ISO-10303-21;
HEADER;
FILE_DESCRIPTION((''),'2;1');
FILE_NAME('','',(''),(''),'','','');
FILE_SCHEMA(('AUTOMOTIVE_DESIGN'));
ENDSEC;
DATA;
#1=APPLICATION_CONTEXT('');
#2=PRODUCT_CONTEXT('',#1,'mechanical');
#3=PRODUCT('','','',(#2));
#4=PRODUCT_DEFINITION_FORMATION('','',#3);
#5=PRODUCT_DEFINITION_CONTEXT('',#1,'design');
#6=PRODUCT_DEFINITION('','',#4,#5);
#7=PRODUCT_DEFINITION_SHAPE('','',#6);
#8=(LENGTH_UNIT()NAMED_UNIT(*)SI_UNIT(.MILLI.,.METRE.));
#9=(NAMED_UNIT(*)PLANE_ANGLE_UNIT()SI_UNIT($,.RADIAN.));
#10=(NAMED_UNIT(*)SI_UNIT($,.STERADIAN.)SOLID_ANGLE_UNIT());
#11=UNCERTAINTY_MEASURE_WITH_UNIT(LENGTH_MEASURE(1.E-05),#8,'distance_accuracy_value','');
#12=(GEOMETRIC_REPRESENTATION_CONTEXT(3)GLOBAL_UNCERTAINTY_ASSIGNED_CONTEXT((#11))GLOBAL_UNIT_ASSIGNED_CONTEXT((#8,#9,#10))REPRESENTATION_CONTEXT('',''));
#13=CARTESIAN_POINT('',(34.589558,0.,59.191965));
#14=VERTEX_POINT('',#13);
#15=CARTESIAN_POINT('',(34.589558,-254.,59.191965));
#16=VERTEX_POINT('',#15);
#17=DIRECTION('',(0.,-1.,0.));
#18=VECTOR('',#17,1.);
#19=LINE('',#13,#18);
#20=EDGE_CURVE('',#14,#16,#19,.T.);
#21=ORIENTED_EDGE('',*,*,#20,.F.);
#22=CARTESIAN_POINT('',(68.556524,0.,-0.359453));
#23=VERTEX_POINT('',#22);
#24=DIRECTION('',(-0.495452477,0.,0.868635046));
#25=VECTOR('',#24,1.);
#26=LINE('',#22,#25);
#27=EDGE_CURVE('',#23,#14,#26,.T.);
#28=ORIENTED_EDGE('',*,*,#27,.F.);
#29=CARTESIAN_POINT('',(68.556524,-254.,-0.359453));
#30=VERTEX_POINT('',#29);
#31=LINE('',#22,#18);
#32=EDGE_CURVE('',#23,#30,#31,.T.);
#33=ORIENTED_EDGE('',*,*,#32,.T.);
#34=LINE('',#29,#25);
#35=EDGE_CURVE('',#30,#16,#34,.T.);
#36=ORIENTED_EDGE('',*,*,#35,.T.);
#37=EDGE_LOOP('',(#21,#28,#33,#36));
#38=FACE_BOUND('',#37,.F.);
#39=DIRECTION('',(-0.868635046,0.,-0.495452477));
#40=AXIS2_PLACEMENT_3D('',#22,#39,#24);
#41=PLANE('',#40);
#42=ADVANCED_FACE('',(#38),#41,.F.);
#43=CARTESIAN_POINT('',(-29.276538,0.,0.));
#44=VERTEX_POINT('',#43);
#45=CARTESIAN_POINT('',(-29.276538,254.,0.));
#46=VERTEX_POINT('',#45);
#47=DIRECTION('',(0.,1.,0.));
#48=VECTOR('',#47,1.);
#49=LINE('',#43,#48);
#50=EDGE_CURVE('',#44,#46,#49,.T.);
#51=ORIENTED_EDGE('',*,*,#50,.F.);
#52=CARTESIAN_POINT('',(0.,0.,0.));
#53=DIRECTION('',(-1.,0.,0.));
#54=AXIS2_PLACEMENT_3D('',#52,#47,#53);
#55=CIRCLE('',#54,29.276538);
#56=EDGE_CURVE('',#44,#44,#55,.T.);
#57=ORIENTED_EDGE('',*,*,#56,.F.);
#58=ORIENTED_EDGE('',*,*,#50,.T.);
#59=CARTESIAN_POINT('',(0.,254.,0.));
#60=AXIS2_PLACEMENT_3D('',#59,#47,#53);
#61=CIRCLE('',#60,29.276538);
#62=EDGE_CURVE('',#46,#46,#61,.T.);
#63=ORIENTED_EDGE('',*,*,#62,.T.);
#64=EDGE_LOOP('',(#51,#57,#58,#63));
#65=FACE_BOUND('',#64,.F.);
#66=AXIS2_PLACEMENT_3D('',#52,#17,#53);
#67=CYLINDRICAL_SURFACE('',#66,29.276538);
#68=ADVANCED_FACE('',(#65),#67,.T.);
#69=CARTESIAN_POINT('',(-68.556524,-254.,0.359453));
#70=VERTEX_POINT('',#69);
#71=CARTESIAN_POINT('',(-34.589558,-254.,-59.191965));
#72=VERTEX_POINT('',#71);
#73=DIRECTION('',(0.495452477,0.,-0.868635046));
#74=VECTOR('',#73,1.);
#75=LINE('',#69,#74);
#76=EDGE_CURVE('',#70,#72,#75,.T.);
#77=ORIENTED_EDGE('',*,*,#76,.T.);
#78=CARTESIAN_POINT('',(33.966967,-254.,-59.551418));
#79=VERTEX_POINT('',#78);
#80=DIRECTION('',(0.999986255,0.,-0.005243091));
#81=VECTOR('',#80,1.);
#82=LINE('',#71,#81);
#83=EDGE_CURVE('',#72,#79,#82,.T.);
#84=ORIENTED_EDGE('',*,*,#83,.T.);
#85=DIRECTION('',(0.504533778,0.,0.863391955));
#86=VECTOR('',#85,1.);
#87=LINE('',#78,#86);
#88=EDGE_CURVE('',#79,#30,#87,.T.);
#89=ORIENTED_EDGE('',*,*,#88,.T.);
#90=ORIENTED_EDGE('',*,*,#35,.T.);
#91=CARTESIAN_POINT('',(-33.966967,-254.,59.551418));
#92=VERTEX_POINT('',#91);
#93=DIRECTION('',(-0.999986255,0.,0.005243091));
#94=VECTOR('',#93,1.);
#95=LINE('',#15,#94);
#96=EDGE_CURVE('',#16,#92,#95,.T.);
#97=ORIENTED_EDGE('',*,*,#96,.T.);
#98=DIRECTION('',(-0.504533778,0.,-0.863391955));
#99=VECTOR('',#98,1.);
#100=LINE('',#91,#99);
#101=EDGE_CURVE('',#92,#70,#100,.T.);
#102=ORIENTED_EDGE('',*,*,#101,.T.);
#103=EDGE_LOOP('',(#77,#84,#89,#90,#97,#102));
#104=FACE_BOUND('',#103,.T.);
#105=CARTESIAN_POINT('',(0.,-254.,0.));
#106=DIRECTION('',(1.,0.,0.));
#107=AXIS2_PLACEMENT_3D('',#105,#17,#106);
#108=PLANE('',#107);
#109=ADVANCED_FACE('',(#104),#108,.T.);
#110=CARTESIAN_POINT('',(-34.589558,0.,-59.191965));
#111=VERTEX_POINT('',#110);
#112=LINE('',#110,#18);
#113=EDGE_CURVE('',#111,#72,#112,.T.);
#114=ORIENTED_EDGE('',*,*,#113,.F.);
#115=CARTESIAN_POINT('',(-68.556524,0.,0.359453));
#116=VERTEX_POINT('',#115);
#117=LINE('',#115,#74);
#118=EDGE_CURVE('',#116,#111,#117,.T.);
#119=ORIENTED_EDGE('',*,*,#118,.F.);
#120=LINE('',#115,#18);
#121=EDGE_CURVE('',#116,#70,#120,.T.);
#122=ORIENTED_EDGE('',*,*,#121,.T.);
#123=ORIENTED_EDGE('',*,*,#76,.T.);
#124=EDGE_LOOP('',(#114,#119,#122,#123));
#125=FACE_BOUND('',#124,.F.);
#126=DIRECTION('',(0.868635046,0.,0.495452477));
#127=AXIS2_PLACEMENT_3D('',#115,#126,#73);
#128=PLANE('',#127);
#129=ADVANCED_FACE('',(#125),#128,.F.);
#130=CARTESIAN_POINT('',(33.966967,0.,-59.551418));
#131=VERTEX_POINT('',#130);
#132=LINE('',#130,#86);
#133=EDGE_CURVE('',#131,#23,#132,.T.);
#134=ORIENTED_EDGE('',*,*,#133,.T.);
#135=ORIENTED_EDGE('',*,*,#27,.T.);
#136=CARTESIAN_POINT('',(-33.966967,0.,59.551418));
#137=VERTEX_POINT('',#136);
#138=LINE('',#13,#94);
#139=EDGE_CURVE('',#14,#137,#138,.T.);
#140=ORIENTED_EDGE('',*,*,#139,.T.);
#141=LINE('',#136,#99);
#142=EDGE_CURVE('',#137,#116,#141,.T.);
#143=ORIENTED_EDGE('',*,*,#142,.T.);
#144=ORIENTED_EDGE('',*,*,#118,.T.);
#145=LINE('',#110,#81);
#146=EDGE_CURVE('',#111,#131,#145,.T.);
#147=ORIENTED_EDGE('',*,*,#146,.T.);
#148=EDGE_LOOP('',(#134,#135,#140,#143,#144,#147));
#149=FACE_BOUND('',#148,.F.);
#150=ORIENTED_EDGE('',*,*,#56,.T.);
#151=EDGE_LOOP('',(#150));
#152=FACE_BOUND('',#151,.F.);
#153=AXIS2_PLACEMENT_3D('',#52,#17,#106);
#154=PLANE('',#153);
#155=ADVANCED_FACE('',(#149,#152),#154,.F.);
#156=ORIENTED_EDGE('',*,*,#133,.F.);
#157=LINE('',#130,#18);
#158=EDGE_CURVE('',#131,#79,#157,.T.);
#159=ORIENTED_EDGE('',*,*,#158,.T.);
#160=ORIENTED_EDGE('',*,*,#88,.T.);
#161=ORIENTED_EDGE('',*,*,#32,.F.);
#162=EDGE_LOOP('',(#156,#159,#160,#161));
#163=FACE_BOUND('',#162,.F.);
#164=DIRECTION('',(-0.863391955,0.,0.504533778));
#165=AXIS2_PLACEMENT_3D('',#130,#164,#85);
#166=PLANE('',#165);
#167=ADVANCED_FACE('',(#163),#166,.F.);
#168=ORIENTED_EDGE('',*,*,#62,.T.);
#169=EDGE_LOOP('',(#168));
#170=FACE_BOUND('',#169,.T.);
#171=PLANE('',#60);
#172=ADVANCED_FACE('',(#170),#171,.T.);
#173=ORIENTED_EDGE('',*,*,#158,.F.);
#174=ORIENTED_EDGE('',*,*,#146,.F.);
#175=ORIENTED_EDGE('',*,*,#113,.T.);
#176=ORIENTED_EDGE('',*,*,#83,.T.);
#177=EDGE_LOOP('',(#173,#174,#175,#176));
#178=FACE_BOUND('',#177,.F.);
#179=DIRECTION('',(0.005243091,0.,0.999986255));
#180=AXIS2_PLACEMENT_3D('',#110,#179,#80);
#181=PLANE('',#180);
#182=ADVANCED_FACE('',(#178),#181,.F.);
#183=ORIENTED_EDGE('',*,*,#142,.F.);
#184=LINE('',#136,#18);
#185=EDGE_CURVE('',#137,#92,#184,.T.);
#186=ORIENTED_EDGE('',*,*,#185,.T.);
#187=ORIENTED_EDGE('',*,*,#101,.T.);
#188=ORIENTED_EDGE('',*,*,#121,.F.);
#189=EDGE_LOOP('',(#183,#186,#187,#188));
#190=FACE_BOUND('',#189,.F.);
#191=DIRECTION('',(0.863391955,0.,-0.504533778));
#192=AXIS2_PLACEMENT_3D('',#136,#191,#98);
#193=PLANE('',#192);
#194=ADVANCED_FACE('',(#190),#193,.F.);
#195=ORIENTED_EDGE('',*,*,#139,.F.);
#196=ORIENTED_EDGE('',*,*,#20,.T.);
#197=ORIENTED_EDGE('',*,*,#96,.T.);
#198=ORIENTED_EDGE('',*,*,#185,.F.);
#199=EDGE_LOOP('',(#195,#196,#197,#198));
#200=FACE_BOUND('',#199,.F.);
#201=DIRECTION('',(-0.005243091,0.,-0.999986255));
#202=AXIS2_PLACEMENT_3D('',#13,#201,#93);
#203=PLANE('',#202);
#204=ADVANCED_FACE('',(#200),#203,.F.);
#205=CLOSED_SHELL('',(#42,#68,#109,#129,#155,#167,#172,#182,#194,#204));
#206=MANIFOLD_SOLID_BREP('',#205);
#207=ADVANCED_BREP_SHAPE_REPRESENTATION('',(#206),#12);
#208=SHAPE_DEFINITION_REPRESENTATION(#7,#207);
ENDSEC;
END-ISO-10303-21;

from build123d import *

# Parameters (mm, degrees)
F1_DEPTH = 254
F4_R     = 29.2765375906
F5_DEPTH = 254


# Not quite as in the source:
# - the program builds the solid bodies; features that only make, move or delete a surface that nothing else refers to are left out


with BuildPart() as f1:
    # F0 (on Front) → F1 (new body)
    with BuildSketch(Plane.XZ):
        Polygon((33.9669666181, -59.5514180462), (68.5565241684, -0.3594530423), (34.5895575503, 59.1919650039), (-33.9669666181, 59.5514180462), (-68.5565241684, 0.3594530423), (-34.5895575503, -59.1919650039), align=None)
    extrude(amount=F1_DEPTH)

    # F4 (on face) → F5 (join)
    with BuildSketch(Plane(origin=(0, 0, 0), x_dir=(-1, 0, 0), z_dir=(0, 1, 0))):
        Circle(F4_R)
    extrude(amount=F5_DEPTH)


solid = f1.part
